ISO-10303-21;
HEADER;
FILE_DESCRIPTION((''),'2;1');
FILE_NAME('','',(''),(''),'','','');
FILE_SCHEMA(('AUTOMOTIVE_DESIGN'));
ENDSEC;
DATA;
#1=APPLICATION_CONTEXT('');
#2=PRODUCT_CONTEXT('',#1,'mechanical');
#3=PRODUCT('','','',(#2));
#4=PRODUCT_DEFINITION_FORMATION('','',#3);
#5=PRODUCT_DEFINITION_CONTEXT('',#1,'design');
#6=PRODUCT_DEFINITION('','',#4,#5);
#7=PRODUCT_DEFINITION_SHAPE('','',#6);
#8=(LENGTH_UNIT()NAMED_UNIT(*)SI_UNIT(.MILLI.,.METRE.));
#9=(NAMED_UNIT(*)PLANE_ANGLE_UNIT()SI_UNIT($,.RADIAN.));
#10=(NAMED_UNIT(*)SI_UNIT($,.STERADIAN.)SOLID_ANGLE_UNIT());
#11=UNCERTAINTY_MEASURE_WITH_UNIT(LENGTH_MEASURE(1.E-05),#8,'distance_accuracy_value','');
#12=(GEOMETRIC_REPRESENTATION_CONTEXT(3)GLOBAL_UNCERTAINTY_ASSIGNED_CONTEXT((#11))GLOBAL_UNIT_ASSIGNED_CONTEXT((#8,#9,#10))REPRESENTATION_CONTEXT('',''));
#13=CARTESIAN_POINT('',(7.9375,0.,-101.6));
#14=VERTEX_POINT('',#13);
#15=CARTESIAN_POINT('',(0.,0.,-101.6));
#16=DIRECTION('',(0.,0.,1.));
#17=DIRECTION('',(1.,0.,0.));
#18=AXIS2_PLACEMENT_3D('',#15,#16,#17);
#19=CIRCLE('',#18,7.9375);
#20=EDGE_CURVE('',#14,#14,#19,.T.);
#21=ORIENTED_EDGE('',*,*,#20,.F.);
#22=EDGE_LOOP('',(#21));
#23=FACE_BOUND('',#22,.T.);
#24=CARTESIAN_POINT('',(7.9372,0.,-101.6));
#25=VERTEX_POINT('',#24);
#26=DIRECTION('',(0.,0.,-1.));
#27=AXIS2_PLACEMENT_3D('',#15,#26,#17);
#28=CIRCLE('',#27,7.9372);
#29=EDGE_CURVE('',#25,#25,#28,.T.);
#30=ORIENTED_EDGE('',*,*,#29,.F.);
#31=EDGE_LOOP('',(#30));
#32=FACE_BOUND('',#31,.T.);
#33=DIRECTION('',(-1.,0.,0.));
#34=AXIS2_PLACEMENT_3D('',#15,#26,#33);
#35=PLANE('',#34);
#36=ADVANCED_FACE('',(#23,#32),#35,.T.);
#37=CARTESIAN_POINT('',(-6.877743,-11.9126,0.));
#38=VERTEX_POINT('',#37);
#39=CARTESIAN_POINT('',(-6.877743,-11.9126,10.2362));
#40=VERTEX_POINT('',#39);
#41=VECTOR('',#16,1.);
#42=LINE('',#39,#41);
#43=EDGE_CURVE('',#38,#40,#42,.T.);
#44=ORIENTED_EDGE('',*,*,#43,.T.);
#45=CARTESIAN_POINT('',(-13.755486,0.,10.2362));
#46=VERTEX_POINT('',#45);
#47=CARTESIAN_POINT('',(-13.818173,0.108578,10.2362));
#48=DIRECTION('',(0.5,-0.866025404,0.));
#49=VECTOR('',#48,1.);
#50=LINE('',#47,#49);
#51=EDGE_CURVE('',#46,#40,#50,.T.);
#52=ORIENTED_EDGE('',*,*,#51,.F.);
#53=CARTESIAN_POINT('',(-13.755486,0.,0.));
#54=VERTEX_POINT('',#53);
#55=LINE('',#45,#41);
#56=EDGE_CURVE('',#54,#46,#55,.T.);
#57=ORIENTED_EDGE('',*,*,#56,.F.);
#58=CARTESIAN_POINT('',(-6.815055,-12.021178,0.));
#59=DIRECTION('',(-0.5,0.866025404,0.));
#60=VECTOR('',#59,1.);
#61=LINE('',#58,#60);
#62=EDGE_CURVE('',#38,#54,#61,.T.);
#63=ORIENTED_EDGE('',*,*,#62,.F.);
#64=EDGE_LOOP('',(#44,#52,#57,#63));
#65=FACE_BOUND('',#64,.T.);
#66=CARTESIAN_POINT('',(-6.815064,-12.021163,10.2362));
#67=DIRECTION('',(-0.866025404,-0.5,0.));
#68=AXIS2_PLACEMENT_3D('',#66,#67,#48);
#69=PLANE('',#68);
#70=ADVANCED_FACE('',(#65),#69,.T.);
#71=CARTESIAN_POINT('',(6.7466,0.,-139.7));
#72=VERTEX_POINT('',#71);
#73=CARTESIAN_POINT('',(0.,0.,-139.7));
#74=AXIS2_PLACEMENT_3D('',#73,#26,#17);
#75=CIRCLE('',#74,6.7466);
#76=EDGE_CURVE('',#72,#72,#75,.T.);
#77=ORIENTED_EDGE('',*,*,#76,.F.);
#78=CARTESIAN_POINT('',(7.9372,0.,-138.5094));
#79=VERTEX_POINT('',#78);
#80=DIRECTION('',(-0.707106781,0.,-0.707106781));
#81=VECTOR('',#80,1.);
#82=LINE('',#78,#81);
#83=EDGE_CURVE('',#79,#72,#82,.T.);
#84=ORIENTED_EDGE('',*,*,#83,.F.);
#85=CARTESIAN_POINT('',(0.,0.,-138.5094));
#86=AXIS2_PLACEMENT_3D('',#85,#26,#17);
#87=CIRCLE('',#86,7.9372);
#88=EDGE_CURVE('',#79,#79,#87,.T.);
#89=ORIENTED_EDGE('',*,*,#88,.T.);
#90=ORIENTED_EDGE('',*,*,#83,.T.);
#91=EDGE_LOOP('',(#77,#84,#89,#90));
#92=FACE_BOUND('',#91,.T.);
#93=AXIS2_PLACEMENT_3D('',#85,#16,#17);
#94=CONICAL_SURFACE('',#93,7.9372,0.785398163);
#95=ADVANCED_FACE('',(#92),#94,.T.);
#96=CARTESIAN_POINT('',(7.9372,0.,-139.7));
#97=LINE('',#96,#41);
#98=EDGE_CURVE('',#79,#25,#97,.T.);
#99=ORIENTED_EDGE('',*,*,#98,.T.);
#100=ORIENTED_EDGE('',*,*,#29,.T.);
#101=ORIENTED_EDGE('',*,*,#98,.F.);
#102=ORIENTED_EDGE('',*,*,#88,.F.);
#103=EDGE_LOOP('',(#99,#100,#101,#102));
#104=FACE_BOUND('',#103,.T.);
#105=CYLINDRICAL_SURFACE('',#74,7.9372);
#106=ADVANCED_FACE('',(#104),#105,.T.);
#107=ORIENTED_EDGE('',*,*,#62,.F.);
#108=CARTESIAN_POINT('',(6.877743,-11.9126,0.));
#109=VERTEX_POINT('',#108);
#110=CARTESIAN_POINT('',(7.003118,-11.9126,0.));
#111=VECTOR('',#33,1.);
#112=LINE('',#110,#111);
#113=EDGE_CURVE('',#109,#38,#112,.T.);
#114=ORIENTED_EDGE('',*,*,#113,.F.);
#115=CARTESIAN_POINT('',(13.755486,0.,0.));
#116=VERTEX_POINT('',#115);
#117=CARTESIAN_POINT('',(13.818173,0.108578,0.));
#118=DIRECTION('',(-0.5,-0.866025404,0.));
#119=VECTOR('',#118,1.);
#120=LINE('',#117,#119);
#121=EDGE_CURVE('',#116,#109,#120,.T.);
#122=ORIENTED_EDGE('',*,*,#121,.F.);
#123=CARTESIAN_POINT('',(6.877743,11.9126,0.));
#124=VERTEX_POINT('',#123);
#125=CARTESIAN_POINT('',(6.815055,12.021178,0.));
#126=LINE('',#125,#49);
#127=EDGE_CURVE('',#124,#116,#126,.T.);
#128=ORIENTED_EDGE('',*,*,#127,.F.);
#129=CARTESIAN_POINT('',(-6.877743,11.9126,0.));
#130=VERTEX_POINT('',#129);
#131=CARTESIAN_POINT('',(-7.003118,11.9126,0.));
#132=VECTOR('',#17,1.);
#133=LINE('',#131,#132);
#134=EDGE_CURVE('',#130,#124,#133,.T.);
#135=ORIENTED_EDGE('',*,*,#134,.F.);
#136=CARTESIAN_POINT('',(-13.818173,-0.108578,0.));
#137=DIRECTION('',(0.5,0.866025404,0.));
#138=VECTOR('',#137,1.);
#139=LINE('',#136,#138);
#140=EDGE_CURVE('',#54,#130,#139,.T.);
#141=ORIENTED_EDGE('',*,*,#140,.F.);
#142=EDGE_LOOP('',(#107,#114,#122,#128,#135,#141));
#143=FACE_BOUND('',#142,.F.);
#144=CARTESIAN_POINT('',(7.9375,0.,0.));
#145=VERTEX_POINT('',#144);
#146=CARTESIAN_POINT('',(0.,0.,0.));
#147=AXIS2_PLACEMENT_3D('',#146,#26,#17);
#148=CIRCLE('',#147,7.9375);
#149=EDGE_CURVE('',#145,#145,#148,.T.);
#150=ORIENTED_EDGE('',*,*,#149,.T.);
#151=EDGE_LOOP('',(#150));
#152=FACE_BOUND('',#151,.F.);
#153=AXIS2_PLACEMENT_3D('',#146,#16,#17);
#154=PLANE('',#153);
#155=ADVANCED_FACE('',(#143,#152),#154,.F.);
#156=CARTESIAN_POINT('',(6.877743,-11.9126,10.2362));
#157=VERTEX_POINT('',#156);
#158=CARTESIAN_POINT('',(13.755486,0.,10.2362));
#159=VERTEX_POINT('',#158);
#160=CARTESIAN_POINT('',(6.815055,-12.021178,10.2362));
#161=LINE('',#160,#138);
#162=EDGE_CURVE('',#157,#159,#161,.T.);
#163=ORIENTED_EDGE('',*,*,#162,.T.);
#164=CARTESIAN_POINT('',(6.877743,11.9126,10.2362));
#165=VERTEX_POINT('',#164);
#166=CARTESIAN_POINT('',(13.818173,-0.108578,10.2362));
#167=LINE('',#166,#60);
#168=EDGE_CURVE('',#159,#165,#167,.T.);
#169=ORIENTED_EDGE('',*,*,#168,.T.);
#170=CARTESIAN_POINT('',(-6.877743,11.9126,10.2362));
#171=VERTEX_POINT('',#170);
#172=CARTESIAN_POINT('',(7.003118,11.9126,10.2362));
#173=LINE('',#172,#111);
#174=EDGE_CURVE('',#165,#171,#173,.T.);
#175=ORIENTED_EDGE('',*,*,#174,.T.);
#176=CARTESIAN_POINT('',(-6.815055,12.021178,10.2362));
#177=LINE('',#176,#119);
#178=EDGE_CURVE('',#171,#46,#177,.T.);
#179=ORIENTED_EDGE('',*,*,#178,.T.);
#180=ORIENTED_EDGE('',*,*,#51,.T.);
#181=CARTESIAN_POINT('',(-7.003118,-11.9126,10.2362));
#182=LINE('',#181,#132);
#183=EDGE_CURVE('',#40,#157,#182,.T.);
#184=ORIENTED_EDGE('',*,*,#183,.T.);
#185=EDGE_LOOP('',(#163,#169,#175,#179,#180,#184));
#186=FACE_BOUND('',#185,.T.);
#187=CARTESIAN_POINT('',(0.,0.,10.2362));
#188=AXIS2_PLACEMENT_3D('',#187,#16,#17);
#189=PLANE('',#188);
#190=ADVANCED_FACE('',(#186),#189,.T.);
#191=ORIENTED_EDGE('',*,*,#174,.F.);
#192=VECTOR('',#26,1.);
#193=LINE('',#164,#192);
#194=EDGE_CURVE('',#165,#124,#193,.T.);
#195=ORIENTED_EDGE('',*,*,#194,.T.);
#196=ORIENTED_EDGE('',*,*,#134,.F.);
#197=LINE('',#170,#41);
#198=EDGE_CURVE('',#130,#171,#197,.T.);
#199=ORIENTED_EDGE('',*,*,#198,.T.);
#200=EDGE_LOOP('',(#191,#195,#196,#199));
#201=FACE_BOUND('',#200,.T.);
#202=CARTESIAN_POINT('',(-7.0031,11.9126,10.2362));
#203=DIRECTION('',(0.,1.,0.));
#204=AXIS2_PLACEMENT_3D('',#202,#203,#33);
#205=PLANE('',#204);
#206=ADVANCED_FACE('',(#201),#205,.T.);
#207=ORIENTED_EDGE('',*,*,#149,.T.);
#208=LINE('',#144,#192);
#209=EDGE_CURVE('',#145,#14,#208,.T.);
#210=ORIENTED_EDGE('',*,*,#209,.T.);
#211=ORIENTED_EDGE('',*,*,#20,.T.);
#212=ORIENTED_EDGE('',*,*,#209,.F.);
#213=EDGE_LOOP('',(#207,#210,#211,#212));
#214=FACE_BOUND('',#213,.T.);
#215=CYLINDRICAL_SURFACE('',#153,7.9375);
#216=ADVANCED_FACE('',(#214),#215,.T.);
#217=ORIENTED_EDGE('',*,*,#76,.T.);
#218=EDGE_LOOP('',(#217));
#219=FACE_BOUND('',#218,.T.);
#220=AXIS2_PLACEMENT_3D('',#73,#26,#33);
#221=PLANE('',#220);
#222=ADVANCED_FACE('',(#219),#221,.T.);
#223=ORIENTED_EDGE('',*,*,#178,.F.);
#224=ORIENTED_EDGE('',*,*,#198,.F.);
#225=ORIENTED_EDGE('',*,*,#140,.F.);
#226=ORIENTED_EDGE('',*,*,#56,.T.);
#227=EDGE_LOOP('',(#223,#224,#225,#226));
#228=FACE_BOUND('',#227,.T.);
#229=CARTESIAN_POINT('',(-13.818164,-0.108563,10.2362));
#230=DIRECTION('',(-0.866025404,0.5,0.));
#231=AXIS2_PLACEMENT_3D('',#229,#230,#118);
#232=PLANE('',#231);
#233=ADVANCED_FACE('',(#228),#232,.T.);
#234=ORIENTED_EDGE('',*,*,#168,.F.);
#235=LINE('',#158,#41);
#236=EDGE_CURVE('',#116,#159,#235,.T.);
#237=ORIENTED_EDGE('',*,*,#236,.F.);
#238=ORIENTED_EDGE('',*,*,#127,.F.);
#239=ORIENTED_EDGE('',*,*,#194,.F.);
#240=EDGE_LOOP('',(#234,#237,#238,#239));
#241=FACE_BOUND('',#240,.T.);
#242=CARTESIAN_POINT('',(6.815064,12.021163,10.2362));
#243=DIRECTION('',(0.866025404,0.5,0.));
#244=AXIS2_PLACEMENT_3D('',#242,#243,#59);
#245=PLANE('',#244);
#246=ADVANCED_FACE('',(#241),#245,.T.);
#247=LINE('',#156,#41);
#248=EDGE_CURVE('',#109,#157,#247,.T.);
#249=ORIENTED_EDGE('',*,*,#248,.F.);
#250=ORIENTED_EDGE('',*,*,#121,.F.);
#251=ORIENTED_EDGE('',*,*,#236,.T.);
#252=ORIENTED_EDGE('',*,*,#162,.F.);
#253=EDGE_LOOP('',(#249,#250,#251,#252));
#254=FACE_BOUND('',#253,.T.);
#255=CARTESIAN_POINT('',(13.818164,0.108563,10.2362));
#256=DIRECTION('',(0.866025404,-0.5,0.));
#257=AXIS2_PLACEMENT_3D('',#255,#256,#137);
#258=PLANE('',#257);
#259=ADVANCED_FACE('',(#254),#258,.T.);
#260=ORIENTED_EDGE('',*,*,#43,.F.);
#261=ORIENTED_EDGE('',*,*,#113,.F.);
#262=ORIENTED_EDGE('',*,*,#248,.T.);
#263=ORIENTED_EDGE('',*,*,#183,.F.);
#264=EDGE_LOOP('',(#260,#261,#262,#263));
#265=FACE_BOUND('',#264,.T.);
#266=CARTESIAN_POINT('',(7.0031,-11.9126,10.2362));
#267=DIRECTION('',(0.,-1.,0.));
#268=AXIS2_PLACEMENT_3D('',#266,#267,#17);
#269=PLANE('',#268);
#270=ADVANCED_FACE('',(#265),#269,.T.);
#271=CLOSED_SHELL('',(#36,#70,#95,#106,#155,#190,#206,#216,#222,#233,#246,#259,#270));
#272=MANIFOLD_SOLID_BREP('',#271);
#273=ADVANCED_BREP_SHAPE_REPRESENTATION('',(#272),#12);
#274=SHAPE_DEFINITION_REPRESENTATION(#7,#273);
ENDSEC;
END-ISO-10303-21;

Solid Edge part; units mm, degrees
sketch "Sketch1" plane through (0, 0, 0) normal (0, 0, 1) x (1, 0, 0)
  circle A0 centre (0, 0) radius 13.8186
  dimension "D1" = 27.6372
extrude "Protrusion1" add sketch "Sketch1" along normal blind 10.2362
sketch "Sketch2" plane through (0, 0, 0) normal (0, 0, -1) x (1, 0, 0)
  circle A0 centre (0, 0) radius 7.9375
extrude "Protrusion2" add sketch "Sketch2" along normal blind 139.7
sketch "Sketch3" plane through (0, 0, -139.7) normal (0, 0, -1) x (1, 0, 0)
  circle A0 centre (0, 0) radius 7.9372
extrude "Cutout1" cut sketch "Sketch3" against normal blind 38.1 flip side to cut
chamfer "Chamfer_1" distance 1.1906 angle 45 1 edges at (-7.9372, 0, -139.7)
sketch "Sketch4" plane through (0, 0, 10.2362) normal (0, 0, 1) x (1, 0, 0)
  line L0 (-7.0031, 11.9126) -> (7.0031, 11.9126)
  dimension "D1" = 23.8252
extrude "Cutout2" cut sketch "Sketch4" against normal up to next material side at (0, 11.9626, 10.2362)
pattern_circular "Pattern1" count 6 over 360 about axis through (0, 0, 10.2362) along (0, 0, 1) of "Cutout2"
properties part number "24103077"
